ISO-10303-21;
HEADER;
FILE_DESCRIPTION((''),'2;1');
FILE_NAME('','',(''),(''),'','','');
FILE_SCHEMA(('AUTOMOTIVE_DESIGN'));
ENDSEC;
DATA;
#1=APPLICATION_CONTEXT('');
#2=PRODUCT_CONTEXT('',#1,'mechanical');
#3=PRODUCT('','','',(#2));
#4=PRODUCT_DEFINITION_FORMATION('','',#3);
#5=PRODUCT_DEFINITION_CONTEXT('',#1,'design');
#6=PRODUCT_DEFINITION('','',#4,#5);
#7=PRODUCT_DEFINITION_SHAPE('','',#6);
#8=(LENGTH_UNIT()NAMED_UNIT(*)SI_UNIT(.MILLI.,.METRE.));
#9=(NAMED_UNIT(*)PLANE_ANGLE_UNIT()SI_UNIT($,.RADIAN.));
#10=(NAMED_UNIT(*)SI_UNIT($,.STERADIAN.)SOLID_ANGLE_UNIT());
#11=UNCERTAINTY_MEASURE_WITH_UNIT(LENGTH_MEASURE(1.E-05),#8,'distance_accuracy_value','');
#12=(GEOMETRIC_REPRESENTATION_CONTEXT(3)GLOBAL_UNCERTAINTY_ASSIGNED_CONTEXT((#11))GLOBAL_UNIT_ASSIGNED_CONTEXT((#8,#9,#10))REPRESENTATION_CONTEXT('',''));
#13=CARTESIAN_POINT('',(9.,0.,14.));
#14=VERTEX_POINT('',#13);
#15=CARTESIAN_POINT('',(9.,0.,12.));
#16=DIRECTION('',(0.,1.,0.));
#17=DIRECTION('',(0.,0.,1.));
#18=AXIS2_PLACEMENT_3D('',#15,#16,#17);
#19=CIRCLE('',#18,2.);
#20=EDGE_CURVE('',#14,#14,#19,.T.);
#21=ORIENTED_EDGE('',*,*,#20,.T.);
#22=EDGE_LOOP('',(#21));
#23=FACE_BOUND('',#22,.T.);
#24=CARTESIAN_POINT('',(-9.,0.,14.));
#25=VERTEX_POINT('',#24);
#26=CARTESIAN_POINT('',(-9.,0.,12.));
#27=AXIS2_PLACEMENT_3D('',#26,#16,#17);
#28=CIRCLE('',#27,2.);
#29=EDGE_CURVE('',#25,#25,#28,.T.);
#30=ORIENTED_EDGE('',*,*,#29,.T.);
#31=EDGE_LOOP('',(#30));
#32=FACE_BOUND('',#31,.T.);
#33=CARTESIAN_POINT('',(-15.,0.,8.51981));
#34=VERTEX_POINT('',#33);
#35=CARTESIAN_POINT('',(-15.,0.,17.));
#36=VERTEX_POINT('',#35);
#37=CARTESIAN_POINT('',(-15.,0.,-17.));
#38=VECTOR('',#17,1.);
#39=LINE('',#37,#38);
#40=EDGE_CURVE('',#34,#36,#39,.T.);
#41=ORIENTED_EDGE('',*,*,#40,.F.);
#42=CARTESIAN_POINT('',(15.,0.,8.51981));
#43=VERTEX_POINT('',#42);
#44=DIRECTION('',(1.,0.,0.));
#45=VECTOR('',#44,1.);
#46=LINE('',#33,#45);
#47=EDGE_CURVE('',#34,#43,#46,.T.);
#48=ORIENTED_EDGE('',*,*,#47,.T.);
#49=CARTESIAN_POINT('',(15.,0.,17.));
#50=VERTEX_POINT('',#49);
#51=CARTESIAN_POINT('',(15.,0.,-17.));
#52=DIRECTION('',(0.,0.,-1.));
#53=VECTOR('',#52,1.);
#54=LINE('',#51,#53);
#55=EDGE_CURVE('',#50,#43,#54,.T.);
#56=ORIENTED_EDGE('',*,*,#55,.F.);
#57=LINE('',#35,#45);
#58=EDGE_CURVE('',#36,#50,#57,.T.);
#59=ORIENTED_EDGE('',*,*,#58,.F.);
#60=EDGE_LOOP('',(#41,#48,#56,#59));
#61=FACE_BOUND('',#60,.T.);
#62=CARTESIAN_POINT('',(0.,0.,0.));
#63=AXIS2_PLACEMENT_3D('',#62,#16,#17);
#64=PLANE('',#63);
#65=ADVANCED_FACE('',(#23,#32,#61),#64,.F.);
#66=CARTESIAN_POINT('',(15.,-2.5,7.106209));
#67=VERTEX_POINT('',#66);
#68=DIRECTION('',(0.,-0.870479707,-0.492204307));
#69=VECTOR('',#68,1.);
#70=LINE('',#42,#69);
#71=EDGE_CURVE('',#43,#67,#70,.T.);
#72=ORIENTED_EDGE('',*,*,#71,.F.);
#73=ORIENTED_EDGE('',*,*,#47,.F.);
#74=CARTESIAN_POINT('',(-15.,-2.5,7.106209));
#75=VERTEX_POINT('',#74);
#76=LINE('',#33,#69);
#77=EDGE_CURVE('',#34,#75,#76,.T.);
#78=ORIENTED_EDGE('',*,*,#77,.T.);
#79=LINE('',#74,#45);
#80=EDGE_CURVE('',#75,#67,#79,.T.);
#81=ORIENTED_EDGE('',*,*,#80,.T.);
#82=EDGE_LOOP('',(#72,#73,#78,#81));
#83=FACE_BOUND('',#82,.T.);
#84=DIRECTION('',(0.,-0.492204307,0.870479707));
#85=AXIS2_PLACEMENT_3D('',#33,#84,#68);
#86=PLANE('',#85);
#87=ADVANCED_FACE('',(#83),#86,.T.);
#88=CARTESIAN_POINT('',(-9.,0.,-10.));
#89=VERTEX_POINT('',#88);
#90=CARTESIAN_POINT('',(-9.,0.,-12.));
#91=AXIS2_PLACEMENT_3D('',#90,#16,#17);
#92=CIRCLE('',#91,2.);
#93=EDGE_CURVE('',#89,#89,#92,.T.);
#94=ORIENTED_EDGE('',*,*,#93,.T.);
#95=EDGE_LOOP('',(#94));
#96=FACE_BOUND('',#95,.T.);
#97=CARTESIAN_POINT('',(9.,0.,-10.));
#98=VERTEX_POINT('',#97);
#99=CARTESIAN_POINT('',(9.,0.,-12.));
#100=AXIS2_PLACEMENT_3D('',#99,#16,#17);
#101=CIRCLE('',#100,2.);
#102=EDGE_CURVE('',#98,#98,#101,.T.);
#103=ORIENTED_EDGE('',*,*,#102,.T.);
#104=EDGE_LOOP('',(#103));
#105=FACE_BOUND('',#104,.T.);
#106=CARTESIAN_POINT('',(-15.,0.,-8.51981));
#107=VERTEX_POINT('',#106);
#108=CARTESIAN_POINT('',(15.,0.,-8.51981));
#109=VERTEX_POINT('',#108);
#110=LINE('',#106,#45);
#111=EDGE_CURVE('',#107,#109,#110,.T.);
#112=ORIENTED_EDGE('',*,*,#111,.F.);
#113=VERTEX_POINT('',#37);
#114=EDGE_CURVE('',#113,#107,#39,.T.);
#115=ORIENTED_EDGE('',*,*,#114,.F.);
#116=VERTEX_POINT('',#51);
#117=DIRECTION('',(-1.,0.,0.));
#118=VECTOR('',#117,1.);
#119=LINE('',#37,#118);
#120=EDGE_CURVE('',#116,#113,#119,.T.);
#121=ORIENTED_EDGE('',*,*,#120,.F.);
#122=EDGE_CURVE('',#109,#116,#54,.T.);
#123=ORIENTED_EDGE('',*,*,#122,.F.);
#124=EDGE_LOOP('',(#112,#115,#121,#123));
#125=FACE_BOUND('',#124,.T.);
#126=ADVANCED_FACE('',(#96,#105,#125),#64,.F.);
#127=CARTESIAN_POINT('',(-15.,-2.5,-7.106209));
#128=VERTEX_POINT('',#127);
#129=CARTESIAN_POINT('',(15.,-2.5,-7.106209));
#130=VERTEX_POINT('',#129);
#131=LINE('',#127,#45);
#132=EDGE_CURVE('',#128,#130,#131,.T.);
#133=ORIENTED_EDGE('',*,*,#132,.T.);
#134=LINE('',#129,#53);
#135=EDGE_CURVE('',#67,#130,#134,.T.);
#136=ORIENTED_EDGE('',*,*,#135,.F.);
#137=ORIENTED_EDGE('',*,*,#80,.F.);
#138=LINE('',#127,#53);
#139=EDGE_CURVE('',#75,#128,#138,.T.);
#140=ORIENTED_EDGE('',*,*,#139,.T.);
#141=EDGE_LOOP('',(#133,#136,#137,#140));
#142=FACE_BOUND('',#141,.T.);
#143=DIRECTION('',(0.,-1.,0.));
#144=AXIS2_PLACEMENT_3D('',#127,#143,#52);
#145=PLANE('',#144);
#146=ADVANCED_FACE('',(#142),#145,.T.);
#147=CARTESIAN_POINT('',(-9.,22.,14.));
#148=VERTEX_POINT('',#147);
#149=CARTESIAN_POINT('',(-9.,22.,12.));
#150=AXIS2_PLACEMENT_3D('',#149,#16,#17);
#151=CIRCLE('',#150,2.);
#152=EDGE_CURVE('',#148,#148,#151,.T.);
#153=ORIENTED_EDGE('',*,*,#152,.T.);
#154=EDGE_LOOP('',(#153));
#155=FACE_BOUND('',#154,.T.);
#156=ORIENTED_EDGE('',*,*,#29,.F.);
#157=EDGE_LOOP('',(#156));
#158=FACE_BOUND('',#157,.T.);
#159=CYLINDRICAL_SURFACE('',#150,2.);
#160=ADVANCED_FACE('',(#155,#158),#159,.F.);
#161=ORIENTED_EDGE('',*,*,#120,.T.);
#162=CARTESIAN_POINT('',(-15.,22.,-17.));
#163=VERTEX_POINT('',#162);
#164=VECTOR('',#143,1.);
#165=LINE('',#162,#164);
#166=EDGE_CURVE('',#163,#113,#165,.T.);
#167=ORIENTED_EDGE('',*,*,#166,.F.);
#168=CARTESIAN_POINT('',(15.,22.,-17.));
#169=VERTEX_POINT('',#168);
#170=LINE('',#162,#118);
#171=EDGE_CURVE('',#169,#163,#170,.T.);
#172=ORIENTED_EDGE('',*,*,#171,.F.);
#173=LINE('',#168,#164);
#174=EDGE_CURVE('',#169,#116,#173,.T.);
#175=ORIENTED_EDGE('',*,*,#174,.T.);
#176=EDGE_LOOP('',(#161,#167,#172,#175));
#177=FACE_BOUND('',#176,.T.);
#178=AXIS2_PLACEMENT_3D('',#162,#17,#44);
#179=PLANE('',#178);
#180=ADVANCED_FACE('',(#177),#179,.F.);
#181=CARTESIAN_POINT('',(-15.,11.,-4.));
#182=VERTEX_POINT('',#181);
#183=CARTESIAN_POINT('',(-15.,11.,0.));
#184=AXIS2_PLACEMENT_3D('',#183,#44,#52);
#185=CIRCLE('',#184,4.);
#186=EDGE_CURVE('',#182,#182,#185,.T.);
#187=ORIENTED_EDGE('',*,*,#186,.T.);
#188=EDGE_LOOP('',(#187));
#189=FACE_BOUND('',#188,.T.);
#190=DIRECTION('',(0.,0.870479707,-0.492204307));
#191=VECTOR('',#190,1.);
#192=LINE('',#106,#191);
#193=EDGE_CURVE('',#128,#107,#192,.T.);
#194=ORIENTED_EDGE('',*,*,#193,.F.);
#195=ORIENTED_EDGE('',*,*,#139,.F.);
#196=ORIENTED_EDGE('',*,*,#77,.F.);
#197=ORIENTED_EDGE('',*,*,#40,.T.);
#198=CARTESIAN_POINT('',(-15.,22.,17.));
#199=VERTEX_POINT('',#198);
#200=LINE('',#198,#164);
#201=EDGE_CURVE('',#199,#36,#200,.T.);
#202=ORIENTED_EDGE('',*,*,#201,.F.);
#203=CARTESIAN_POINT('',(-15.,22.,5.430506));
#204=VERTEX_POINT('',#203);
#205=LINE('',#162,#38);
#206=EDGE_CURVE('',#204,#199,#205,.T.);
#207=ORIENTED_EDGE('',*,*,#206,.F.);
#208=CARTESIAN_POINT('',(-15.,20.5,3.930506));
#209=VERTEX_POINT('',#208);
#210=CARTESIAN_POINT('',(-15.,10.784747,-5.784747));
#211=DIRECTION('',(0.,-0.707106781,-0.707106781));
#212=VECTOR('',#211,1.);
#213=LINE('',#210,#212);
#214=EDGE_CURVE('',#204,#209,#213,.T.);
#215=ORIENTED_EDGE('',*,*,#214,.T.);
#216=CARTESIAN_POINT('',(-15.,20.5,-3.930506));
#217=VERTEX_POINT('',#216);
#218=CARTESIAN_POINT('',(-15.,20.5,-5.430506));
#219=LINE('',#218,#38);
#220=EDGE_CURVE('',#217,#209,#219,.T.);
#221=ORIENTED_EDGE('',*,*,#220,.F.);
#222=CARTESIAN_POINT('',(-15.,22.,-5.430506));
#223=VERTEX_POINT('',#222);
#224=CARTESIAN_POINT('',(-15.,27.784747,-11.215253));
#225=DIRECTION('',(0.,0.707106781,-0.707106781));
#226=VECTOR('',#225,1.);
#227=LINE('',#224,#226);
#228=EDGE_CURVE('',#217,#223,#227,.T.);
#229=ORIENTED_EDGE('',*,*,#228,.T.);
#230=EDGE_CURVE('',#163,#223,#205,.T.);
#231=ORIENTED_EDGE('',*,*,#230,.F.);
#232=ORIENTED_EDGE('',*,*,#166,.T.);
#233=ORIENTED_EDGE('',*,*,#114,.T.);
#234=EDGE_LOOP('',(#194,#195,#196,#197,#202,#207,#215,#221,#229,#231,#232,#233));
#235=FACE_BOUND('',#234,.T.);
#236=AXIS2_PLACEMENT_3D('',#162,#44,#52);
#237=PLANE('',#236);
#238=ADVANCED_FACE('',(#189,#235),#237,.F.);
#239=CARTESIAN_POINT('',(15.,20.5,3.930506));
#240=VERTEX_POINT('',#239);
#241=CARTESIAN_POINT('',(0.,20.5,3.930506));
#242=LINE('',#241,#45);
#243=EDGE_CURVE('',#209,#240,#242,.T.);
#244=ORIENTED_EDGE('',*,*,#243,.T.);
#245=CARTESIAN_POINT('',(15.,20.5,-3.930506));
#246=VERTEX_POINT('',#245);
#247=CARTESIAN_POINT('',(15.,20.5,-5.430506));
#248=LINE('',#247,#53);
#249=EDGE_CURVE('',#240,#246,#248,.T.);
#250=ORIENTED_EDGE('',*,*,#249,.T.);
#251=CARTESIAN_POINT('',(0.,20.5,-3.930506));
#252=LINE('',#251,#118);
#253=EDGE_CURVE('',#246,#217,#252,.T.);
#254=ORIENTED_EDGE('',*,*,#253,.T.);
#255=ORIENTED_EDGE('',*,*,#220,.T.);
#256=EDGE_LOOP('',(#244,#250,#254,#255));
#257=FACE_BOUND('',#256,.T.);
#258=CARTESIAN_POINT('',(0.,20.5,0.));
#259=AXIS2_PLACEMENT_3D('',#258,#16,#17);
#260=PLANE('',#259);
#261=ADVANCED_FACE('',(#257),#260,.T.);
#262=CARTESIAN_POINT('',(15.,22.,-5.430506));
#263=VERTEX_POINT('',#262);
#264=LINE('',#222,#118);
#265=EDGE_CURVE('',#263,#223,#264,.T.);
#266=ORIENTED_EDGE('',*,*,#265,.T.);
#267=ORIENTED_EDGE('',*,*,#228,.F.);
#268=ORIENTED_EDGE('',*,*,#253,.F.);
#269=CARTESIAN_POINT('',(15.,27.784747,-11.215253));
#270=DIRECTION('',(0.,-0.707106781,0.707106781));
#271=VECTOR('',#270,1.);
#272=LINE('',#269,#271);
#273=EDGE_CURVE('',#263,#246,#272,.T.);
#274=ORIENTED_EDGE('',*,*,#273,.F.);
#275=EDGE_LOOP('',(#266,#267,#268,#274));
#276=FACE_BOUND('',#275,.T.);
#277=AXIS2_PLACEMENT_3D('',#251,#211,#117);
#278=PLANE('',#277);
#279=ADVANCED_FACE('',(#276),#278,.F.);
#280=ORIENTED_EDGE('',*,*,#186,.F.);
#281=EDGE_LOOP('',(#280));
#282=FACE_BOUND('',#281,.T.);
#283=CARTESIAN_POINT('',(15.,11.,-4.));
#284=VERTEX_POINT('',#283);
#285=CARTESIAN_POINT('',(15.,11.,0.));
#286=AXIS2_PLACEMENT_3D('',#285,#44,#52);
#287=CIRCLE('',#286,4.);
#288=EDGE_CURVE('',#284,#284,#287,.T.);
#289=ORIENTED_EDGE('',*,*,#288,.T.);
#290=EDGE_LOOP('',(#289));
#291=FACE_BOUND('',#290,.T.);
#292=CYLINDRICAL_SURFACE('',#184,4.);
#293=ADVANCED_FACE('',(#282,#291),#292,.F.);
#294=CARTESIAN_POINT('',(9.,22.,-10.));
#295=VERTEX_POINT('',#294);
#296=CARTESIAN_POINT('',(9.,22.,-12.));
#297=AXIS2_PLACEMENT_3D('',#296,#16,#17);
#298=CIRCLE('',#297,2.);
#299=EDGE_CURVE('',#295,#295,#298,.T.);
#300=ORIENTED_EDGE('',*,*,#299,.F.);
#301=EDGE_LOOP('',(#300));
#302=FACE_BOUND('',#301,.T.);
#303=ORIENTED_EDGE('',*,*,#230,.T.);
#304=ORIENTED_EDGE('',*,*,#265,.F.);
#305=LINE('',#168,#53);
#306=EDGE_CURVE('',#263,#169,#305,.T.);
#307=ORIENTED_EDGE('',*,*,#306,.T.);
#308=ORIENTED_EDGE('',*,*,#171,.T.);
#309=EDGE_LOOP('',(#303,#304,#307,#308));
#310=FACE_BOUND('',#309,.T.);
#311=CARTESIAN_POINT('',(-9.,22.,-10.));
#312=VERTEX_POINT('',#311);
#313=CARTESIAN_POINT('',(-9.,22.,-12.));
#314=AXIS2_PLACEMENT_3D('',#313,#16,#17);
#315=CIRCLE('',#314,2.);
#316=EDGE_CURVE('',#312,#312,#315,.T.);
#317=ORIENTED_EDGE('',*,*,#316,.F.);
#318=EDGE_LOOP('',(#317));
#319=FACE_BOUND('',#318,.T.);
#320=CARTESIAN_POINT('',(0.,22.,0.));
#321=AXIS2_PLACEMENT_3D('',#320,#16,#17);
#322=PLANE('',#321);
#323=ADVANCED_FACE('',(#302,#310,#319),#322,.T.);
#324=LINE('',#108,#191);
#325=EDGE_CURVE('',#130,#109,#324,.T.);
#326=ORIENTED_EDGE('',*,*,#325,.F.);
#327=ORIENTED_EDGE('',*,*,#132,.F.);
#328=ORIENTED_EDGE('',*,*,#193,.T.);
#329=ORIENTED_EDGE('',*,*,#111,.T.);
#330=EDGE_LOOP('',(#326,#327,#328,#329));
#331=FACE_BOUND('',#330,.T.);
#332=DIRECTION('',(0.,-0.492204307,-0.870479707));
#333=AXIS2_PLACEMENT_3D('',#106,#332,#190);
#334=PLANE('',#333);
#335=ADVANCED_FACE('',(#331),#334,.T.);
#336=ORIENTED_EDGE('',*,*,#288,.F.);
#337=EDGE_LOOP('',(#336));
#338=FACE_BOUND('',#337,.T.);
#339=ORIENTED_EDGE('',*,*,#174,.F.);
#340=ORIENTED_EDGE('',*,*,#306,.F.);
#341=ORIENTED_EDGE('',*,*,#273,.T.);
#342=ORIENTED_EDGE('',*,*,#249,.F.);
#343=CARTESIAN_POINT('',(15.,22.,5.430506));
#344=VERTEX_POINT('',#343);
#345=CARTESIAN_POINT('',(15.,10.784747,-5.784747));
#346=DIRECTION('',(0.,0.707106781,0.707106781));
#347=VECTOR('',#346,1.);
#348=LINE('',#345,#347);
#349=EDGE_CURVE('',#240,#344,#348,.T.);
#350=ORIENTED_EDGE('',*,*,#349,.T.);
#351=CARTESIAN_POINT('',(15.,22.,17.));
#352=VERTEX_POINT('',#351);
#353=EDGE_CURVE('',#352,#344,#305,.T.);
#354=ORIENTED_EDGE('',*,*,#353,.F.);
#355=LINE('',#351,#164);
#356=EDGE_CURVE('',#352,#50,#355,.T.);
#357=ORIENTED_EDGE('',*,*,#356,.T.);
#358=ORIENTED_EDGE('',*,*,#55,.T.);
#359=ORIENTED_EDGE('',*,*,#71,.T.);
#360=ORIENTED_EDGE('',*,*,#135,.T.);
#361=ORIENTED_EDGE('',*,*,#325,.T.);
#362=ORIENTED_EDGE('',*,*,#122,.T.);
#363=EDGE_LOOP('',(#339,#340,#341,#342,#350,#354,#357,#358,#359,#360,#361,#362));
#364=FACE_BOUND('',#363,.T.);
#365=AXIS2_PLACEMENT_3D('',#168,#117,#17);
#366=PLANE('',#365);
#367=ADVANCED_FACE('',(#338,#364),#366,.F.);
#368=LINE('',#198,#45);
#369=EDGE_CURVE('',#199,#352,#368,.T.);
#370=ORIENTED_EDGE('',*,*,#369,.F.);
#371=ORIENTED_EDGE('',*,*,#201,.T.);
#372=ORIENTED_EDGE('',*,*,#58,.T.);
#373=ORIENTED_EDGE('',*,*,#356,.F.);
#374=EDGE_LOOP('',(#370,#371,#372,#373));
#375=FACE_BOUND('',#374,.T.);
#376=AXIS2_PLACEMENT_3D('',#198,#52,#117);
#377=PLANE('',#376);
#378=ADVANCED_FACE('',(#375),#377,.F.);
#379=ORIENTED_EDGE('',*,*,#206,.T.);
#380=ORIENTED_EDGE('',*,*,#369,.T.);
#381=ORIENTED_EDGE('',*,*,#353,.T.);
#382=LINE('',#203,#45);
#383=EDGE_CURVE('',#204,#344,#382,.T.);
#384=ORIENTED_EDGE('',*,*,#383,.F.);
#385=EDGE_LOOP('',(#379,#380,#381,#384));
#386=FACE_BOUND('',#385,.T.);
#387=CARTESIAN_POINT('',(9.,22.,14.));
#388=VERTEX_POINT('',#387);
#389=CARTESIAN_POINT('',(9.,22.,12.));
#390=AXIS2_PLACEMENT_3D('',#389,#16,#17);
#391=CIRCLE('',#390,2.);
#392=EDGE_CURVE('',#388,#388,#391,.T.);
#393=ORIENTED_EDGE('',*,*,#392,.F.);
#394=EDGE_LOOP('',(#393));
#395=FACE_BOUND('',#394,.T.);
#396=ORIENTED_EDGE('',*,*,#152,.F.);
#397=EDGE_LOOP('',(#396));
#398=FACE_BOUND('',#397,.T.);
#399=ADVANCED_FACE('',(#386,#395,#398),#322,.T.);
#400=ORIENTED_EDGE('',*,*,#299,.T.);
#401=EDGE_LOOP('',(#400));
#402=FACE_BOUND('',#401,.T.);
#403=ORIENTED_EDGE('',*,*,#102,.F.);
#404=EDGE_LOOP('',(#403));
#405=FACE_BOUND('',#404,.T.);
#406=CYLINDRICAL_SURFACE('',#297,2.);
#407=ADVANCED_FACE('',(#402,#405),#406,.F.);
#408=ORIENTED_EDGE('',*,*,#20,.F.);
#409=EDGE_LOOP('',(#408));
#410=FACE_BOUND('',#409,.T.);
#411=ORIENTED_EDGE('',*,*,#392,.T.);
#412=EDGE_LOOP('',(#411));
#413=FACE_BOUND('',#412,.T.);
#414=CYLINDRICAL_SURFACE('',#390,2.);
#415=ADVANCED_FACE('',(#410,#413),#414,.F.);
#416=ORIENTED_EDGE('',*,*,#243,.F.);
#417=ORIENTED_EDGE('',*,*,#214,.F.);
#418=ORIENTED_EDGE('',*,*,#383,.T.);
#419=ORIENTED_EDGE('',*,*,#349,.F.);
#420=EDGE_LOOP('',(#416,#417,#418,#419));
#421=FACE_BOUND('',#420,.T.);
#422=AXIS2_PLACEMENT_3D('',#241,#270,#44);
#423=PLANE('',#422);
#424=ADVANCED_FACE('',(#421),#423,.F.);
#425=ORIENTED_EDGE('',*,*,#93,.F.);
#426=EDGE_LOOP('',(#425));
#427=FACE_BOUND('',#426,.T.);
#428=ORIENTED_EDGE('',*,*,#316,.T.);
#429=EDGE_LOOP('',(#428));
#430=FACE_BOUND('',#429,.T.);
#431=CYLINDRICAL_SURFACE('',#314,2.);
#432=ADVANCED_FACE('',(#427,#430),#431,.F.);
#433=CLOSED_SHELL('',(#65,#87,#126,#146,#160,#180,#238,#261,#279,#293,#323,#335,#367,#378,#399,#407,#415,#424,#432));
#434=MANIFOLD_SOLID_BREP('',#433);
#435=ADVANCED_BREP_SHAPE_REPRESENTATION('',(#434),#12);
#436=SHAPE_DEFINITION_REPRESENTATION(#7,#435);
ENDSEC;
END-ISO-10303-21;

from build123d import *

# Parameters (mm, degrees)
SKETCH1_W             = 30
SKETCH1_H             = 34
BOSS_EXTRUDE1_DEPTH   = 22
F_4_0MM_DOWEL_HOLE1_D = 4
BOSS_EXTRUDE2_DEPTH   = 30
SKETCH5_W             = 30
SKETCH5_H             = 10.861011286
CUT_EXTRUDE1_DEPTH    = 1.5
CHAMFER2_SIZE         = 1.5
CUT_EXTRUDE2_DEPTH    = 41.902322672


with BuildPart() as part:
    # Sketch1 → Boss-Extrude1 (new body)
    with BuildSketch(Plane(origin=(0, 0, 0), x_dir=(1, 0, 0), z_dir=(0, 1, 0))):
        Rectangle(SKETCH1_W, SKETCH1_H)
    extrude(amount=BOSS_EXTRUDE1_DEPTH)

    # Ø4.0mm Dowel Hole1 (through all)
    with Locations(Plane(origin=(0, 22, 0), x_dir=(1, 0, 0), z_dir=(0, 1, 0))):
        with Locations((9, -12), (-9, -12), (9, 12), (-9, 12)):
            Hole(F_4_0MM_DOWEL_HOLE1_D / 2)

    # Sketch4 → Boss-Extrude2 (add, through all)
    with BuildSketch(Plane(origin=(15, 0, 0), x_dir=(0, 0, -1), z_dir=(1, 0, 0))):
        Polygon((-8.519809931, 0), (8.519809931, 0), (7.106209181, -2.5), (-7.106209181, -2.5), align=None)
    extrude(amount=-BOSS_EXTRUDE2_DEPTH)

    # Sketch5 → Cut-Extrude1 (cut)
    with BuildSketch(Plane(origin=(0, 22, 0), x_dir=(1, 0, 0), z_dir=(0, 1, 0))):
        Rectangle(SKETCH5_W, SKETCH5_H)
    extrude(amount=-CUT_EXTRUDE1_DEPTH, mode=Mode.SUBTRACT)

    # Chamfer2
    chamfer2_edges = [part.edges().sort_by_distance(p)[0] for p in [
        (0, 20.5, 5.430505643),
        (0, 20.5, -5.430505643),
    ]]
    chamfer(chamfer2_edges, length=CHAMFER2_SIZE - 0.0001)  # a hair under: the kernel refuses the full size

    # Sketch8 → Cut-Extrude2 (cut, through all)
    with BuildSketch(Plane(origin=(15, 0, 0), x_dir=(0, 0, -1), z_dir=(1, 0, 0))):
        with BuildLine():
            Line((4, 11), (0, 11))
            Line((0, 11), (-4, 11))
            ThreePointArc((-4, 11), (0, 7), (4, 11))
        make_face()
        with BuildLine():
            Line((-4, 11), (0, 11))
            Line((0, 11), (4, 11))
            ThreePointArc((4, 11), (0, 15), (-4, 11))
        make_face()
    extrude(amount=-CUT_EXTRUDE2_DEPTH, mode=Mode.SUBTRACT)


solid = part.part
